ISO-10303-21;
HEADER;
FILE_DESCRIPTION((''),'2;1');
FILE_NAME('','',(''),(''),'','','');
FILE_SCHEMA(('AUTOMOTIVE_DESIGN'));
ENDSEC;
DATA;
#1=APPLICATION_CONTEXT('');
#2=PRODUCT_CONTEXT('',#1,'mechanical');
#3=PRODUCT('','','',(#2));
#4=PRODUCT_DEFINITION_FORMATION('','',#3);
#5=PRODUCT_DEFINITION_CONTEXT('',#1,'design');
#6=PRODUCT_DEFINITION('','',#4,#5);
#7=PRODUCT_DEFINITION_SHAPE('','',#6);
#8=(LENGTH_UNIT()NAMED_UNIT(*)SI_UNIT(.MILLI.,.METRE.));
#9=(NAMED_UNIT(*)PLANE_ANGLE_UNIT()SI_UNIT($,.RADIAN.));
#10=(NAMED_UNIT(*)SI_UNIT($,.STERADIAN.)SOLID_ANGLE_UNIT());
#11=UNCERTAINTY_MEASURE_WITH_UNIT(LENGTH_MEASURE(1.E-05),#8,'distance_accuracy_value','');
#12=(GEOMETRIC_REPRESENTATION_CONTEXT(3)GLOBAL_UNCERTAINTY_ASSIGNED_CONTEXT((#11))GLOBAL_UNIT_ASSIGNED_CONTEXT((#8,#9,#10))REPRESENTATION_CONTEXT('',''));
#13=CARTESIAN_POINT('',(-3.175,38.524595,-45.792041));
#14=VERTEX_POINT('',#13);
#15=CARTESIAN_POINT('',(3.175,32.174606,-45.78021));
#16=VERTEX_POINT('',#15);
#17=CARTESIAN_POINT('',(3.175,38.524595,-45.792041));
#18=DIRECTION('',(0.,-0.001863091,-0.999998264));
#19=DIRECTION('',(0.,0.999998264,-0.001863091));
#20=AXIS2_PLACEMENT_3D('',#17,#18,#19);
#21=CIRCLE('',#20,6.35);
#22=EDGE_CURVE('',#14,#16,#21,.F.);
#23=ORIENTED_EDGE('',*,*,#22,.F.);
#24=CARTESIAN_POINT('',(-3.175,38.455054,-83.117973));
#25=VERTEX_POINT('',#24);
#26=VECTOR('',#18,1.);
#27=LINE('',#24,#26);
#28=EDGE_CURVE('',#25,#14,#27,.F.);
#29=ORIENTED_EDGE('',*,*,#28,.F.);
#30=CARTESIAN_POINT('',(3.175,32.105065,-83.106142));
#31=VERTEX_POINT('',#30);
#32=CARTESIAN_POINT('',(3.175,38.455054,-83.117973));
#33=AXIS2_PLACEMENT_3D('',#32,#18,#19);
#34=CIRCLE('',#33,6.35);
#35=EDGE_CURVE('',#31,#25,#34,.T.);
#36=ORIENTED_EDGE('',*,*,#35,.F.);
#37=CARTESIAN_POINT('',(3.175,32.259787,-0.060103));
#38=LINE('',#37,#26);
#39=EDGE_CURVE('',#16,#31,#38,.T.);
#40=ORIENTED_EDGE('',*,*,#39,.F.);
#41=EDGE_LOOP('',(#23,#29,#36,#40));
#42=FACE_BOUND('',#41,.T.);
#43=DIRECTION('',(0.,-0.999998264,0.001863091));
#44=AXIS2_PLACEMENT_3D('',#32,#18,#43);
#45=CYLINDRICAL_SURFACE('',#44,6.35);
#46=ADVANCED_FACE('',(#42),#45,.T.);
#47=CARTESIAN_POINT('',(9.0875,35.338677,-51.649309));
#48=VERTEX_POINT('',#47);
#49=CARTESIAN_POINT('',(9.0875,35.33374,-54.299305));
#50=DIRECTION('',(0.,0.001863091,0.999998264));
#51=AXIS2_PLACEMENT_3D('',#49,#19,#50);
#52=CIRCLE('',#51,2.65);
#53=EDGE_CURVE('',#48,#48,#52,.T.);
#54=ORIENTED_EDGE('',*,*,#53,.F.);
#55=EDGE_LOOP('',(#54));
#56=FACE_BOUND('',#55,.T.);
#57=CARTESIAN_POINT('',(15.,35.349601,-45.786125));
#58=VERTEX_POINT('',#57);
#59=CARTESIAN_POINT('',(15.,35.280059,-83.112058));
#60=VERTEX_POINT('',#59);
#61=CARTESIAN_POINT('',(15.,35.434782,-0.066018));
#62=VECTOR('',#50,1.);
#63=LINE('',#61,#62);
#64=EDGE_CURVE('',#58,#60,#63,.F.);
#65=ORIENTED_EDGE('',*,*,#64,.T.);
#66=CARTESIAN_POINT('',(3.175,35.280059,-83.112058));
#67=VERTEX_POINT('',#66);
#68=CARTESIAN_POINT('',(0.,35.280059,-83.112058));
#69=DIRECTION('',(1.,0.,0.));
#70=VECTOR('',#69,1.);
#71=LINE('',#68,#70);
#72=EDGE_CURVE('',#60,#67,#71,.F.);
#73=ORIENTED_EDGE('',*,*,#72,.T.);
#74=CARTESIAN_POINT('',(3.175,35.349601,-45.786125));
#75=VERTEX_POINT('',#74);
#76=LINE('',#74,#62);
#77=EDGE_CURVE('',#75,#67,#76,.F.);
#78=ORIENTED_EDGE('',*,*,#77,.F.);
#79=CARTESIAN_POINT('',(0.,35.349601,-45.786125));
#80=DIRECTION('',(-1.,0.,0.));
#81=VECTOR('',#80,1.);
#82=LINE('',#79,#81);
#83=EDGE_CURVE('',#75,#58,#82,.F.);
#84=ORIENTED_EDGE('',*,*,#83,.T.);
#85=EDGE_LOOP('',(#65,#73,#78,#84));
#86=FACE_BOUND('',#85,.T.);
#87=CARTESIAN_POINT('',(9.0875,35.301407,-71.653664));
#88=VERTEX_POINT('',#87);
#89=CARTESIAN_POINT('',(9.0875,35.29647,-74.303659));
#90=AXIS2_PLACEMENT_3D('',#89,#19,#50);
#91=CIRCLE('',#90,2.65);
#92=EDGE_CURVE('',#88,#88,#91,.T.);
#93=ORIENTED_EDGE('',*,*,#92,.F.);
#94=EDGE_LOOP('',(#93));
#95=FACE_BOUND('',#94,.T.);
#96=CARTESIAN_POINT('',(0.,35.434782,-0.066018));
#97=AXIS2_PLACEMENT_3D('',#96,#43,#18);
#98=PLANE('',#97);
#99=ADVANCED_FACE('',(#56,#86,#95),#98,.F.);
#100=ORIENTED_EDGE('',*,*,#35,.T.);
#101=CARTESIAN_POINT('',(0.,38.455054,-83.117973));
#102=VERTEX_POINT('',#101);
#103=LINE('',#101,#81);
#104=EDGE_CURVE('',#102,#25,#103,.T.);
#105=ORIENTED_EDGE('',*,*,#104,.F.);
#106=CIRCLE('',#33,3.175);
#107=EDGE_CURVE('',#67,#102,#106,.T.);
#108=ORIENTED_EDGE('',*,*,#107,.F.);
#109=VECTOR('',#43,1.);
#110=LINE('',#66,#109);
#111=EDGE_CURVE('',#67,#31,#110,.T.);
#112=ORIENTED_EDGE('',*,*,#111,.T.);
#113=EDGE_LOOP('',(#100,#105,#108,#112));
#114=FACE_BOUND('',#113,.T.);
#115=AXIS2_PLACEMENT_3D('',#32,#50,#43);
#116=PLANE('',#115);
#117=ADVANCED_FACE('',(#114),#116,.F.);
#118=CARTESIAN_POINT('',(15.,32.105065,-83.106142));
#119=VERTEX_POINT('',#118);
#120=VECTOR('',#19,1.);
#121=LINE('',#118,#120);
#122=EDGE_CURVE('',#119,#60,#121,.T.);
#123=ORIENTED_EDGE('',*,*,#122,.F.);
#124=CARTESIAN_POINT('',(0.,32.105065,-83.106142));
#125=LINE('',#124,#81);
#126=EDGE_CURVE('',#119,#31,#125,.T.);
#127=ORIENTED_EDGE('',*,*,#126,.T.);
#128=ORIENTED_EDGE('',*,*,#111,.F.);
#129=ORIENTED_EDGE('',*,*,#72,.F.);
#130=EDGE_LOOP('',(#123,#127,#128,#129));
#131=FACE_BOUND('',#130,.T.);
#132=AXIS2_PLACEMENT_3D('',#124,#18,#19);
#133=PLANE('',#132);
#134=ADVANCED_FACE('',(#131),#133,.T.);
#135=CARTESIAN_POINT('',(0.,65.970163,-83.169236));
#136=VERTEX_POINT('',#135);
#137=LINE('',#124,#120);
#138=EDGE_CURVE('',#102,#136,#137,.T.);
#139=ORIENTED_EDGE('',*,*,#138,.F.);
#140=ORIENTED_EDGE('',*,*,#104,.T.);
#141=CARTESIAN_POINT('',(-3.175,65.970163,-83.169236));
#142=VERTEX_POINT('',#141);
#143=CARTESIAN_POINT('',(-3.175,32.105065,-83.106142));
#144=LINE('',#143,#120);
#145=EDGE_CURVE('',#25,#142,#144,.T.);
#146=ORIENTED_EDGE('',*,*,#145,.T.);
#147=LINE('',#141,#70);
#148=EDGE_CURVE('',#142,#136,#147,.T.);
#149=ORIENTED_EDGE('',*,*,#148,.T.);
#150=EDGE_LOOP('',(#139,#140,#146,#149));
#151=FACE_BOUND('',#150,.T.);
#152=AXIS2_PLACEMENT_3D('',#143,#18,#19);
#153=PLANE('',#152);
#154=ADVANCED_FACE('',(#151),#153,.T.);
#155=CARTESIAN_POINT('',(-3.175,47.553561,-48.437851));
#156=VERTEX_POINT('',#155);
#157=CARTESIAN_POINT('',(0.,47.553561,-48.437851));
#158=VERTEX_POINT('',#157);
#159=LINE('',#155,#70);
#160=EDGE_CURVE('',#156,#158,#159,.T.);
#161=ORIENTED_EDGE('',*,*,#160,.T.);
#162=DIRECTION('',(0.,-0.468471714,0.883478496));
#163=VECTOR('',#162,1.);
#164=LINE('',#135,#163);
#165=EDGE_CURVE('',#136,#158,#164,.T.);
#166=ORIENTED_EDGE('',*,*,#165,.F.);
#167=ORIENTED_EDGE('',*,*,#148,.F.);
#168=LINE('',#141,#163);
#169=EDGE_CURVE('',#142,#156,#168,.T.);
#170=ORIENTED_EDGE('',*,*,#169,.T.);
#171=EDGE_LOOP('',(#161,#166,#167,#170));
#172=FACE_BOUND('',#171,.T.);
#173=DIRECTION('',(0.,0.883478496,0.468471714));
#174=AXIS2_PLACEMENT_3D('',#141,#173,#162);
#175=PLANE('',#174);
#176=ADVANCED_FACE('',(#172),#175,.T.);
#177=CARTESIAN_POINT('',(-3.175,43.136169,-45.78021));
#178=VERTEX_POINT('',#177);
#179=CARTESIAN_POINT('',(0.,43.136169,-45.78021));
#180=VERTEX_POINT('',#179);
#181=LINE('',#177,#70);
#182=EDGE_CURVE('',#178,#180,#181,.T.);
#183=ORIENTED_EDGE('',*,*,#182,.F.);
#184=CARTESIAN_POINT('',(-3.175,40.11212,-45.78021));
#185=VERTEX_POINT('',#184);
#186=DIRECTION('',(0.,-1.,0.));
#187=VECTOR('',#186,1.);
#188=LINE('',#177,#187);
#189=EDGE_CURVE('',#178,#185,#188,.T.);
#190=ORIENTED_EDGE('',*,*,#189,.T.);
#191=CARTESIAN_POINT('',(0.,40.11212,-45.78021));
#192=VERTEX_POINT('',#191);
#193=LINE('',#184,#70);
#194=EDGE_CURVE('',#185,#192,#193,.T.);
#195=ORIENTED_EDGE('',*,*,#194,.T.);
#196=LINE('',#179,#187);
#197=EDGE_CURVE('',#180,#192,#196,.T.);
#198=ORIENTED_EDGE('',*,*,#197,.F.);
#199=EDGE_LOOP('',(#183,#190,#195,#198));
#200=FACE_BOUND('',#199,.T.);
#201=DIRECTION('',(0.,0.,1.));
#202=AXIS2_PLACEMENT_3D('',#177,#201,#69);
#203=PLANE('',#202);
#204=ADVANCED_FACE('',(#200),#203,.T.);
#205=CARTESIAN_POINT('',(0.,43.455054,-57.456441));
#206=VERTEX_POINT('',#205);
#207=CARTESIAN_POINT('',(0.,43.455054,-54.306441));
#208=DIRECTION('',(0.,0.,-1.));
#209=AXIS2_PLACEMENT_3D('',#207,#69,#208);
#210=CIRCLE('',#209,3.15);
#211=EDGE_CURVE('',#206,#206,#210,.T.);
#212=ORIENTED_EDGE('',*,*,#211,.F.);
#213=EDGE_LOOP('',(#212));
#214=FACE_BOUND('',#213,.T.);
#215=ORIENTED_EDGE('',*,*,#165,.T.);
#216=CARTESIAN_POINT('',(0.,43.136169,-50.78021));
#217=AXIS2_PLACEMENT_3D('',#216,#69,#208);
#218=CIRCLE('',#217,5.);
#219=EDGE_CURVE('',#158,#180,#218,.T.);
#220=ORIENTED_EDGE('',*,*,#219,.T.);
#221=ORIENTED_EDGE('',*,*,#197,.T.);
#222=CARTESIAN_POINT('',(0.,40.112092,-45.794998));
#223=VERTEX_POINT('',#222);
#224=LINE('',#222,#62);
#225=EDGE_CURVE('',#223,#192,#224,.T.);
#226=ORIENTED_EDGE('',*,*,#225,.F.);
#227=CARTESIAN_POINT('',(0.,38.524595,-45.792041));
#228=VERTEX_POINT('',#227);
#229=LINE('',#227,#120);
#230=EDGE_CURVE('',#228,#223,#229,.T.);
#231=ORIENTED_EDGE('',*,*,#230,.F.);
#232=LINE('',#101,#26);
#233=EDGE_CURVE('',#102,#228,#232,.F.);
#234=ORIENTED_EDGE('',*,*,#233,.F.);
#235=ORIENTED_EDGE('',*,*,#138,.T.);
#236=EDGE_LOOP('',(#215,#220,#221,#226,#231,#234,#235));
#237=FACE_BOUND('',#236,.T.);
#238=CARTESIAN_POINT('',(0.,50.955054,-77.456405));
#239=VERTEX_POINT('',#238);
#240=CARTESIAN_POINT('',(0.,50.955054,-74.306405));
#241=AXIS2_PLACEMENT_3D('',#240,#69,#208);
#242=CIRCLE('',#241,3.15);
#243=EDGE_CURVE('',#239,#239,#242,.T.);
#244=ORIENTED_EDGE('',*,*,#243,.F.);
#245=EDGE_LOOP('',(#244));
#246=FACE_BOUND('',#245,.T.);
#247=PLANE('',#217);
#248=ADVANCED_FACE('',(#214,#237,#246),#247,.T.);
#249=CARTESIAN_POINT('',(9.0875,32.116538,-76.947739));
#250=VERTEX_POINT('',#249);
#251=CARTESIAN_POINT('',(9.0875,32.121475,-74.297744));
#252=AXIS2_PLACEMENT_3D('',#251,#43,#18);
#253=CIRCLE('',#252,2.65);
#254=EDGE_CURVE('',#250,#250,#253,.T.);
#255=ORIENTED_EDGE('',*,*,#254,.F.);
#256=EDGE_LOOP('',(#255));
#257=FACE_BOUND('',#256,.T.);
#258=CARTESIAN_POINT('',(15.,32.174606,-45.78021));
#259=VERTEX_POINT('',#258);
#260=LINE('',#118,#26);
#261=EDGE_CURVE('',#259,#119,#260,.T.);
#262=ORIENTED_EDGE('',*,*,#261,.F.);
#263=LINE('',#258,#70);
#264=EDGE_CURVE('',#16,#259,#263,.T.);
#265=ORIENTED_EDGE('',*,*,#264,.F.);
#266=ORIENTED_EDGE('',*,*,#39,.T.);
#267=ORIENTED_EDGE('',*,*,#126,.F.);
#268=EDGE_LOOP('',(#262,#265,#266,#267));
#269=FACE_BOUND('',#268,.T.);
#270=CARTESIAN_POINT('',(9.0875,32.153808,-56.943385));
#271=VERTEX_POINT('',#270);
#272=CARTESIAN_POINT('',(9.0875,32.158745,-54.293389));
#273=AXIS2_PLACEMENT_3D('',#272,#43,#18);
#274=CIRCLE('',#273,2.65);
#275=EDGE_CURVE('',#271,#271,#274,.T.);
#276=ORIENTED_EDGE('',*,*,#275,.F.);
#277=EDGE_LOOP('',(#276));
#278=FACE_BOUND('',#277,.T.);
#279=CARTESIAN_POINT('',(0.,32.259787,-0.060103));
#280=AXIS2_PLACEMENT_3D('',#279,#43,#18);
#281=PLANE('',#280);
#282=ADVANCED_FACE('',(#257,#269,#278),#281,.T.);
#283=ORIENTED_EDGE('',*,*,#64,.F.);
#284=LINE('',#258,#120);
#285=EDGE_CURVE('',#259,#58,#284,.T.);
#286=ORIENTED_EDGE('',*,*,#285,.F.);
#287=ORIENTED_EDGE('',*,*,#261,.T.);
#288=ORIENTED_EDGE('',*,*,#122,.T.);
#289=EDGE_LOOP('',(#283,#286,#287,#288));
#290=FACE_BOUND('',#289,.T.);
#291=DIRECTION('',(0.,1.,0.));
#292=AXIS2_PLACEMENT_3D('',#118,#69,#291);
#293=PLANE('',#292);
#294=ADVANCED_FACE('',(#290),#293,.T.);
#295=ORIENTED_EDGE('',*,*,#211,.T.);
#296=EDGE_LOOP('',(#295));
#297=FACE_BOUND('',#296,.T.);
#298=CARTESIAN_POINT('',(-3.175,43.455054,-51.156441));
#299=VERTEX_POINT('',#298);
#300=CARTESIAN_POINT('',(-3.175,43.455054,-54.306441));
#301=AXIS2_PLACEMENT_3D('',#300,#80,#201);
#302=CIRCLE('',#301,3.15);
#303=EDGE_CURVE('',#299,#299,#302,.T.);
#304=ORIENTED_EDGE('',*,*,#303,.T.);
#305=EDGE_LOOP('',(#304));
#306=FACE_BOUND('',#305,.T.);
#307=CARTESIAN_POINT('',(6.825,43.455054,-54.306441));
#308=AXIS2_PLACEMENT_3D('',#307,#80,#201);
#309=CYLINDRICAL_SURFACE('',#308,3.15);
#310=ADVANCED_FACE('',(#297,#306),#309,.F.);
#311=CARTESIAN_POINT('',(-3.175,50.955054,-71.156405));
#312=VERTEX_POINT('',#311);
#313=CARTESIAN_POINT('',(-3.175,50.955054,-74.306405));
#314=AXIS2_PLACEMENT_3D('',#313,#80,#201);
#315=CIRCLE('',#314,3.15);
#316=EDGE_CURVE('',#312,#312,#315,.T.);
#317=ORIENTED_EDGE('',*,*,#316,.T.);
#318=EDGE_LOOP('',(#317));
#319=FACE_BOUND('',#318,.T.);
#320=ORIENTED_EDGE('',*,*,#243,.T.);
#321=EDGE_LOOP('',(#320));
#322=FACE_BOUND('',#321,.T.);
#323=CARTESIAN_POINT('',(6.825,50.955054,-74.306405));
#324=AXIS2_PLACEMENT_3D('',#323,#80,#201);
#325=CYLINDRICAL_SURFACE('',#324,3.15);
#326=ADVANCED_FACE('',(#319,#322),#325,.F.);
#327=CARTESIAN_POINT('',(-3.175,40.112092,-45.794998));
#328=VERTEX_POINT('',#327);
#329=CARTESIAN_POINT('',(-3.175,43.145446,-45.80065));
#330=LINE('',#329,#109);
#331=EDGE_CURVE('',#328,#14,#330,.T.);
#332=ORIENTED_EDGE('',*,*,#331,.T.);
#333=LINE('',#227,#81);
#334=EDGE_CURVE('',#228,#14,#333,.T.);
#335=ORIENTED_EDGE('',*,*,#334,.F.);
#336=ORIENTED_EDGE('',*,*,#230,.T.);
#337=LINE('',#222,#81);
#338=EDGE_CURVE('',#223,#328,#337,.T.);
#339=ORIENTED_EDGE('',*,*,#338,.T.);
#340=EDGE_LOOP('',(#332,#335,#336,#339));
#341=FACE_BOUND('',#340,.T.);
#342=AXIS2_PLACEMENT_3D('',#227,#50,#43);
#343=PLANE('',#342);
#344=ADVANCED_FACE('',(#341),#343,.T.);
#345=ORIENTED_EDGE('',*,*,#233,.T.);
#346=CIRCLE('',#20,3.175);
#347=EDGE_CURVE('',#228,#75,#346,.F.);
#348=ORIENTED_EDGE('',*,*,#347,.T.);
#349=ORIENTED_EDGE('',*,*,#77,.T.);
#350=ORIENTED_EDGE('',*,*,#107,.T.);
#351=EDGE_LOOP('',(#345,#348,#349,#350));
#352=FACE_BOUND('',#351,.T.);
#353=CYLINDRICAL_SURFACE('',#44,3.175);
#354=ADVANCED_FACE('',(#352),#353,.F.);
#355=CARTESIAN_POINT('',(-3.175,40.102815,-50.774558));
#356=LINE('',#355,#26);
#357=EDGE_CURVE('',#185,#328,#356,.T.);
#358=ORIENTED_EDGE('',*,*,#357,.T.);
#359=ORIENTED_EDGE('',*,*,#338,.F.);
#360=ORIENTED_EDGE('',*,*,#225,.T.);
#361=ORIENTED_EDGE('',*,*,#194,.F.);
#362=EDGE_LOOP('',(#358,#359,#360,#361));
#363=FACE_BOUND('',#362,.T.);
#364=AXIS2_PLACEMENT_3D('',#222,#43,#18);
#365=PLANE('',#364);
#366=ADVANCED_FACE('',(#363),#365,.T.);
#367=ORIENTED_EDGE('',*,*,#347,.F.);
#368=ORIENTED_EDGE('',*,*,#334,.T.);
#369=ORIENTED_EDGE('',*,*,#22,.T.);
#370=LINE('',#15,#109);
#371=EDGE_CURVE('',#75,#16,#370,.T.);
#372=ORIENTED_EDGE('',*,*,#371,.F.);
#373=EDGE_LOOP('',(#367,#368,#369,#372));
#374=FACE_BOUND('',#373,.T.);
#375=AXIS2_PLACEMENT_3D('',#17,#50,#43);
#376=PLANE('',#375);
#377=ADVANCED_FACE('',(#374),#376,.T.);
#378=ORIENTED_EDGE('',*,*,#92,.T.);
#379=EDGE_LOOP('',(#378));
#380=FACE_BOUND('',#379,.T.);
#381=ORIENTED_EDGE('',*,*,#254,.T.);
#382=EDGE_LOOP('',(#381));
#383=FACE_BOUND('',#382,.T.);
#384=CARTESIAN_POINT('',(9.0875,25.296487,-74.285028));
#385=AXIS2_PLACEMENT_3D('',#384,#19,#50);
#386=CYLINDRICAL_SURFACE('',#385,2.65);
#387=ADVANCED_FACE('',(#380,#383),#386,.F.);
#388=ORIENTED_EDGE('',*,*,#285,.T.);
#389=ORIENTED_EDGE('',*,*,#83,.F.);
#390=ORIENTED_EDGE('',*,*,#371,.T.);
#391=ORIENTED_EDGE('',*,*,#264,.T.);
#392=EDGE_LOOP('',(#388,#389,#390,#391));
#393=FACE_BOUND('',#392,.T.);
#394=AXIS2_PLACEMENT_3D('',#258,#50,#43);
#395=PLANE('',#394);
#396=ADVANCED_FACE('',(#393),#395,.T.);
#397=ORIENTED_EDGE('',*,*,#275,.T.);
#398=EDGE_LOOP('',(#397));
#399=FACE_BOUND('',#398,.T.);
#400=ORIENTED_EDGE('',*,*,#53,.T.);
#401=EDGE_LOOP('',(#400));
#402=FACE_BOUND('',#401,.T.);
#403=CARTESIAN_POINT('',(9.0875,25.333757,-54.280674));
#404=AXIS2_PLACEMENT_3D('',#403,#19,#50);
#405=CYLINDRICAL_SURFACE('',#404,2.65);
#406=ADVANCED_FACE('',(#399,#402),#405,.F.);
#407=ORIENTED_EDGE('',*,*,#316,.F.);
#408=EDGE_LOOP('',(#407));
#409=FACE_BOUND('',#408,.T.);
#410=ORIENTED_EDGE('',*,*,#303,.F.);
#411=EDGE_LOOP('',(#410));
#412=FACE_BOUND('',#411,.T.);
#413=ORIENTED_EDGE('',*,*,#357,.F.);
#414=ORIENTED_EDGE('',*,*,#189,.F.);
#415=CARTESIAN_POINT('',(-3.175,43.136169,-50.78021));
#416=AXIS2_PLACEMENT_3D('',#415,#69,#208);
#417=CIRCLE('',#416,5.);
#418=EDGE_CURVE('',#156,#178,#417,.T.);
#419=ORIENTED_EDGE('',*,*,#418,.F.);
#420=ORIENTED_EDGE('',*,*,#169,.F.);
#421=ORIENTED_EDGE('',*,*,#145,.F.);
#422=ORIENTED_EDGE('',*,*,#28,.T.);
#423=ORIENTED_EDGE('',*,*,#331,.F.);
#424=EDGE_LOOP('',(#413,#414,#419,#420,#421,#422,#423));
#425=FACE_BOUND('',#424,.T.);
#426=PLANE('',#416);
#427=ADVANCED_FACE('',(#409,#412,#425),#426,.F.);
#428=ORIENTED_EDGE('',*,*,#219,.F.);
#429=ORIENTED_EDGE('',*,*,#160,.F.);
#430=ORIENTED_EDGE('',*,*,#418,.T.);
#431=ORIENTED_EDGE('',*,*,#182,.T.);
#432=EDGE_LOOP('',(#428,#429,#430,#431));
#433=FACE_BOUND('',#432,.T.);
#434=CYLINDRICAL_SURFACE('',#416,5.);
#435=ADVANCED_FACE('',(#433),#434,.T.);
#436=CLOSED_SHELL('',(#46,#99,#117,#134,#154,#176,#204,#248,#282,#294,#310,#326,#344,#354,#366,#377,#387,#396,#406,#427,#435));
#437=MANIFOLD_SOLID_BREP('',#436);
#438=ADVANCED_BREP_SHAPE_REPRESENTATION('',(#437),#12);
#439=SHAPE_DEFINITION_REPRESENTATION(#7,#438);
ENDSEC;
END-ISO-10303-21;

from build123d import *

# Parameters (mm, degrees)
BASE_FLANGE1_DEPTH            = 3.175
EDGE_FLANGE1_STRIP_W          = 19.05
EDGE_FLANGE1_STRIP_H          = 3.175
EDGE_FLANGE1_STRIP_CUT_DEPTH  = 37.325997284
EDGE_FLANGE1_RELIEF_W         = 20.6375
EDGE_FLANGE1_RELIEF_H         = 1.5875
EDGE_FLANGE1_RELIEF_CUT_DEPTH = 3.175
EDGE_FLANGE1_DEPTH            = 37.325997284
SKETCH15_R                    = 2.65
CUT_EXTRUDE2_DEPTH            = 10
SKETCH19_R                    = 3.15
CUT_EXTRUDE4_DEPTH            = 10


# Sheet-metal steps are written as plain solids
with BuildPart() as part:
    # Sketch3 → Base-Flange1 (new body)
    with BuildSketch(Plane(origin=(0, 0, 0), x_dir=(0, 0, -1), z_dir=(1, 0, 0))):
        with BuildLine():
            Line((83.106142408, 32.105064535), (45.780209905, 32.174606262))
            Line((45.780209905, 32.174606262), (45.780209905, 43.136168925))
            ThreePointArc((45.780209905, 43.136168925), (46.495831721, 45.713784796), (48.437851335, 47.553561406))
            Line((48.437851335, 47.553561406), (83.169236275, 65.970162941))
            Line((83.169236275, 65.970162941), (83.106142408, 32.105064535))
        make_face()
    extrude(amount=-BASE_FLANGE1_DEPTH)

    # Edge-Flange1 strip (across the edge) → Edge-Flange1 strip cut (cut)
    with BuildSketch(Plane(origin=(0, 32.174606262, -45.780209905), x_dir=(3.4914813388431334e-15, 0.999998264444559, -0.001863090945206598), z_dir=(0, -0.001863090945206598, -0.999998264444559))):
        with Locations((-3.175, -1.5875)):
            Rectangle(EDGE_FLANGE1_STRIP_W, EDGE_FLANGE1_STRIP_H)
    extrude(amount=EDGE_FLANGE1_STRIP_CUT_DEPTH, mode=Mode.SUBTRACT)

    # Edge-Flange1 relief (on the sheet) → Edge-Flange1 relief cut (cut)
    with BuildSketch(Plane(origin=(0, 38.524595242, -45.792040532), x_dir=(6.982962677686267e-15, 0.999998264444559, -0.001863090945206598), z_dir=(1, 0, 0))):
        with Locations((-8.73125, 0.79375)):
            Rectangle(EDGE_FLANGE1_RELIEF_W, EDGE_FLANGE1_RELIEF_H)
    extrude(amount=-EDGE_FLANGE1_RELIEF_CUT_DEPTH, mode=Mode.SUBTRACT)

    # Edge-Flange1 section (across the edge) → Edge-Flange1 (add)
    with BuildSketch(Plane(origin=(0, 32.174606262, -45.780209905), x_dir=(3.4914813388431334e-15, 0.999998264444559, -0.001863090945206598), z_dir=(0, -0.001863090945206598, -0.999998264444559))):
        with BuildLine():
            Line((0, 3.175), (0, 15))
            Line((0, 15), (3.175, 15))
            Line((3.175, 15), (3.175, 3.175))
            ThreePointArc((3.175, 3.175), (4.10493597, 0.92993597), (6.35, 0))
            Line((6.35, 0), (6.35, -3.175))
            ThreePointArc((6.35, -3.175), (1.859871939, -1.315128061), (0, 3.175))
        make_face()
    extrude(amount=EDGE_FLANGE1_DEPTH)

    # Sketch15 → Cut-Extrude2 (cut)
    with BuildSketch(Plane(origin=(0, 35.434781617, -0.066018335), x_dir=(1, 0, 0), z_dir=(-3.23986857388729e-15, 0.999998264444559, -0.0018630909452065992))):
        with Locations(Location((9.0875, 74.237769892, 0), (0, 0, 270))):
            Circle(SKETCH15_R)
        with Locations(Location((9.0875, 54.233380341, 0), (0, 0, 270))):
            Circle(SKETCH15_R)
    extrude(amount=-CUT_EXTRUDE2_DEPTH, mode=Mode.SUBTRACT)

    # Sketch19 → Cut-Extrude4 (cut)
    with BuildSketch(Plane.ZY.offset(3.175)):
        with Locations((-54.306440614, 43.455053514)):
            Circle(SKETCH19_R)
        with Locations((-74.30640548, 50.955053514)):
            Circle(SKETCH19_R)
    extrude(amount=-CUT_EXTRUDE4_DEPTH, mode=Mode.SUBTRACT)


solid = part.part
